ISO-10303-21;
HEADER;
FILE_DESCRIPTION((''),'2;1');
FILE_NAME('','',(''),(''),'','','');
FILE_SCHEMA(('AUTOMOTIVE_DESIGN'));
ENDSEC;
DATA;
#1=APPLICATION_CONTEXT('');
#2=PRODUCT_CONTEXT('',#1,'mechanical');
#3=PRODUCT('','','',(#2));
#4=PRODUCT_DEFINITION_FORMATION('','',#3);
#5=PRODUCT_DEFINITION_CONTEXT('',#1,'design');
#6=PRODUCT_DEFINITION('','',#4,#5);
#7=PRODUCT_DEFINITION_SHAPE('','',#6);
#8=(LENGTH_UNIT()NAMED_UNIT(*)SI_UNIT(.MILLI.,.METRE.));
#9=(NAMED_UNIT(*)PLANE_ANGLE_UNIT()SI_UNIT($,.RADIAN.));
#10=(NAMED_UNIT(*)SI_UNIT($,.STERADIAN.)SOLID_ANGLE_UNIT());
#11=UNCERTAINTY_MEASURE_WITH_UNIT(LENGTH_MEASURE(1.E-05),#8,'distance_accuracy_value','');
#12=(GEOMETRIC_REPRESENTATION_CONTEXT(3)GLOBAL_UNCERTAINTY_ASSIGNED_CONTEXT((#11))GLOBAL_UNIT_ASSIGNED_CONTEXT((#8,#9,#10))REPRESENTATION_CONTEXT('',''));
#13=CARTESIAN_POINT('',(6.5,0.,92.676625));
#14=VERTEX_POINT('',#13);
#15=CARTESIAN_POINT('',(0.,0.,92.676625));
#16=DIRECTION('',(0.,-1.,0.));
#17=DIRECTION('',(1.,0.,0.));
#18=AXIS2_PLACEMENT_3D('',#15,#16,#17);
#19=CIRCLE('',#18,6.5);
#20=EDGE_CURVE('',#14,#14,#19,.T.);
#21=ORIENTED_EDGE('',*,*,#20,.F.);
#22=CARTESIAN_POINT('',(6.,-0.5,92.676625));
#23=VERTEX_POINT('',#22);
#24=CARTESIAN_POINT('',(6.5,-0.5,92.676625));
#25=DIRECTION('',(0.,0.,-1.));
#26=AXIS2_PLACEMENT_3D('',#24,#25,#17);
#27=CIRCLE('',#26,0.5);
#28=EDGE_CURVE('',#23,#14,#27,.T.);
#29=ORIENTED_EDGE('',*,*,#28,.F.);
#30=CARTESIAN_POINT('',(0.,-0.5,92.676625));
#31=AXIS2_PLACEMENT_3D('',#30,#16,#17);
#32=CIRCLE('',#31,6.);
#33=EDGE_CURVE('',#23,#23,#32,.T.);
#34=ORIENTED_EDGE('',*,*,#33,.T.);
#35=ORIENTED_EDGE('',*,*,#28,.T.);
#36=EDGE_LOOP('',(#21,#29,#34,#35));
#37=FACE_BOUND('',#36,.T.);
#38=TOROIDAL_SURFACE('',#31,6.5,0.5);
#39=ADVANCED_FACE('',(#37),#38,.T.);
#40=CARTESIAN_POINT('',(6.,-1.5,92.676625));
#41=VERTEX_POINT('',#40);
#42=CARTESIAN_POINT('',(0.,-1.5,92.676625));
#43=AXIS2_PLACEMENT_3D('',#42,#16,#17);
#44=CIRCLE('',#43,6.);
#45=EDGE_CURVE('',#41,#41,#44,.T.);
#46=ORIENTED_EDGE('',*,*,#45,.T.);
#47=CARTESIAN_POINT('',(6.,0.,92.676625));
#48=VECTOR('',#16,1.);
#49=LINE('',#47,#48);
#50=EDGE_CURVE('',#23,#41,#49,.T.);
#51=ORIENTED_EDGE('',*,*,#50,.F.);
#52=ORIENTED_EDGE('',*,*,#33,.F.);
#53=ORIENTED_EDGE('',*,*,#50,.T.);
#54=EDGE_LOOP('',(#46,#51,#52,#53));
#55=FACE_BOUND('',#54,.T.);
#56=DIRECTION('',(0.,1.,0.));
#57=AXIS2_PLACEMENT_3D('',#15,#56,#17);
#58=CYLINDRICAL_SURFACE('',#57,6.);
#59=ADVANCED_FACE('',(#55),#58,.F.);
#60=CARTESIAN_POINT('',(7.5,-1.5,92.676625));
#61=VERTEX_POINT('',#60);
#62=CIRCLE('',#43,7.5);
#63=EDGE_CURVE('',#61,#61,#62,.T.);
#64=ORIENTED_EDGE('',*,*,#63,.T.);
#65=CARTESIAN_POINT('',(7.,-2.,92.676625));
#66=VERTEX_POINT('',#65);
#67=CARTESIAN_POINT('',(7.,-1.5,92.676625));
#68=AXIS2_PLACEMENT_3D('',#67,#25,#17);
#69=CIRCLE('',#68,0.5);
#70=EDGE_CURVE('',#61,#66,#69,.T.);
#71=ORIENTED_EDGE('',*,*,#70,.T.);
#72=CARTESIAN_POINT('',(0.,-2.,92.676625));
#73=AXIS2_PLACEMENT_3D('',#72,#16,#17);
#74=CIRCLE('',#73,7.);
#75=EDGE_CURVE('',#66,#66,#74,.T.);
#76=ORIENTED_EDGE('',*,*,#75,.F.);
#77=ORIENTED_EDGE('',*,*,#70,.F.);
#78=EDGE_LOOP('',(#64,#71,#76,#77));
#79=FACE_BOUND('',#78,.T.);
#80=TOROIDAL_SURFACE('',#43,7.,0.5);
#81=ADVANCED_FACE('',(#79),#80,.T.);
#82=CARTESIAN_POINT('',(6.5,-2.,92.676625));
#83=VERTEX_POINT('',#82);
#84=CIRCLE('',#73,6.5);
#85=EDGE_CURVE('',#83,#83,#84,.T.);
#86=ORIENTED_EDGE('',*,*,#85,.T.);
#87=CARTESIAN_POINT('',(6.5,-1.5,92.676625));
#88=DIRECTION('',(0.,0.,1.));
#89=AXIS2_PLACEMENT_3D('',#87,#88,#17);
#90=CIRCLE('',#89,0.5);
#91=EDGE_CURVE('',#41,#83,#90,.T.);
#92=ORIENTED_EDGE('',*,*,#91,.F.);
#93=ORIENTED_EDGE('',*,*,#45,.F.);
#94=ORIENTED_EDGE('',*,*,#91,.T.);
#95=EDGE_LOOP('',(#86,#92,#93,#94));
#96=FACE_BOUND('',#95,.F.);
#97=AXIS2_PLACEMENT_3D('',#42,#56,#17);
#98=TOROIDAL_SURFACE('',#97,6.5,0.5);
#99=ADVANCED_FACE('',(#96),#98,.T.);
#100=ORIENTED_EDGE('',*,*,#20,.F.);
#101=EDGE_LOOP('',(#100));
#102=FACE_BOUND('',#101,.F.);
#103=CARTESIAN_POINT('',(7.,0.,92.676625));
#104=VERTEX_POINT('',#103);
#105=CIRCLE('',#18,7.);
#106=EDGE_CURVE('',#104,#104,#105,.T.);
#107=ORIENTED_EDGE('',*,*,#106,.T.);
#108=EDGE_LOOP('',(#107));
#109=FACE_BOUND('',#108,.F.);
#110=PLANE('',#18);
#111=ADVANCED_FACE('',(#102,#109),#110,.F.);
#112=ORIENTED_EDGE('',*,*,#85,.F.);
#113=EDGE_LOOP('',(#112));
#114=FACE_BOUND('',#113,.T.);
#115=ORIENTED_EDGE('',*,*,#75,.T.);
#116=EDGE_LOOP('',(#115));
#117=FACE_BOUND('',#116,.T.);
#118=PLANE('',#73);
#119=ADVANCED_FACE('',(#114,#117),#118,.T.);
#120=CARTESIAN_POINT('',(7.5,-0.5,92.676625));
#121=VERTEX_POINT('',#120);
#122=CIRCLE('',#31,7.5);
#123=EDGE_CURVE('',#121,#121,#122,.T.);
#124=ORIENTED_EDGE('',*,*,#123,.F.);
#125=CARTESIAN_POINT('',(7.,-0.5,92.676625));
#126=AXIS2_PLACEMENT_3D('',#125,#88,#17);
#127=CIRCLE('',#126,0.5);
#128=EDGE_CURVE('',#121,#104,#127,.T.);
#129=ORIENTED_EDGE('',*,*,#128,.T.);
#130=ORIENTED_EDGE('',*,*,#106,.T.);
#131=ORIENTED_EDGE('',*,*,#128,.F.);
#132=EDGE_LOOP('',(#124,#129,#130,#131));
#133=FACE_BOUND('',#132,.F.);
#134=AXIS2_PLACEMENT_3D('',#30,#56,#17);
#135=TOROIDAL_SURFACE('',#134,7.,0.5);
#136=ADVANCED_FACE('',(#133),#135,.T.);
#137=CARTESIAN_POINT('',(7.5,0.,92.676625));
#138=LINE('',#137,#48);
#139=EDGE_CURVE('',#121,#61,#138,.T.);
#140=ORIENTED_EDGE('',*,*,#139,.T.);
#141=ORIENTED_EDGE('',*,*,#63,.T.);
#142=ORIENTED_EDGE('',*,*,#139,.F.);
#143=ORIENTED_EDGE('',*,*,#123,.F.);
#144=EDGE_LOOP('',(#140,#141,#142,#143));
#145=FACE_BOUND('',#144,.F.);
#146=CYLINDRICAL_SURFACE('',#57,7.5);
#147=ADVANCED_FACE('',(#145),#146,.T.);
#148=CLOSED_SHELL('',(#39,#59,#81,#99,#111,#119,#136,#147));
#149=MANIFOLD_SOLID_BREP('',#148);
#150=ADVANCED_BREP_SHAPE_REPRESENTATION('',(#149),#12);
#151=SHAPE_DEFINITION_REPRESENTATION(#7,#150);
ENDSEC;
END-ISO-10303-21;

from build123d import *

# Parameters (mm, degrees)
F0_R     = 7.5
F0_R_2   = 6
F1_DEPTH = 2
F2_R     = 0.5


# Not quite as in the source:
# - the program builds the solid bodies; features that only make, move or delete a surface that nothing else refers to are left out


with BuildPart() as f1:
    # F0 (on Front) → F1 (new body)
    with BuildSketch(Plane.XZ):
        with Locations((0, 92.6766253437)):
            Circle(F0_R)
        with Locations((0, 92.6766253437)):
            Circle(F0_R_2, mode=Mode.SUBTRACT)
    extrude(amount=F1_DEPTH)

    # F2
    f2_edges = [f1.edges().sort_by_distance(p)[0] for p in [
        (-7.5, -2, 92.676625),
        (-6, -2, 92.676625),
        (-7.5, 0, 92.676625),
        (-6, 0, 92.676625),
    ]]
    fillet(f2_edges, radius=F2_R)


solid = f1.part
